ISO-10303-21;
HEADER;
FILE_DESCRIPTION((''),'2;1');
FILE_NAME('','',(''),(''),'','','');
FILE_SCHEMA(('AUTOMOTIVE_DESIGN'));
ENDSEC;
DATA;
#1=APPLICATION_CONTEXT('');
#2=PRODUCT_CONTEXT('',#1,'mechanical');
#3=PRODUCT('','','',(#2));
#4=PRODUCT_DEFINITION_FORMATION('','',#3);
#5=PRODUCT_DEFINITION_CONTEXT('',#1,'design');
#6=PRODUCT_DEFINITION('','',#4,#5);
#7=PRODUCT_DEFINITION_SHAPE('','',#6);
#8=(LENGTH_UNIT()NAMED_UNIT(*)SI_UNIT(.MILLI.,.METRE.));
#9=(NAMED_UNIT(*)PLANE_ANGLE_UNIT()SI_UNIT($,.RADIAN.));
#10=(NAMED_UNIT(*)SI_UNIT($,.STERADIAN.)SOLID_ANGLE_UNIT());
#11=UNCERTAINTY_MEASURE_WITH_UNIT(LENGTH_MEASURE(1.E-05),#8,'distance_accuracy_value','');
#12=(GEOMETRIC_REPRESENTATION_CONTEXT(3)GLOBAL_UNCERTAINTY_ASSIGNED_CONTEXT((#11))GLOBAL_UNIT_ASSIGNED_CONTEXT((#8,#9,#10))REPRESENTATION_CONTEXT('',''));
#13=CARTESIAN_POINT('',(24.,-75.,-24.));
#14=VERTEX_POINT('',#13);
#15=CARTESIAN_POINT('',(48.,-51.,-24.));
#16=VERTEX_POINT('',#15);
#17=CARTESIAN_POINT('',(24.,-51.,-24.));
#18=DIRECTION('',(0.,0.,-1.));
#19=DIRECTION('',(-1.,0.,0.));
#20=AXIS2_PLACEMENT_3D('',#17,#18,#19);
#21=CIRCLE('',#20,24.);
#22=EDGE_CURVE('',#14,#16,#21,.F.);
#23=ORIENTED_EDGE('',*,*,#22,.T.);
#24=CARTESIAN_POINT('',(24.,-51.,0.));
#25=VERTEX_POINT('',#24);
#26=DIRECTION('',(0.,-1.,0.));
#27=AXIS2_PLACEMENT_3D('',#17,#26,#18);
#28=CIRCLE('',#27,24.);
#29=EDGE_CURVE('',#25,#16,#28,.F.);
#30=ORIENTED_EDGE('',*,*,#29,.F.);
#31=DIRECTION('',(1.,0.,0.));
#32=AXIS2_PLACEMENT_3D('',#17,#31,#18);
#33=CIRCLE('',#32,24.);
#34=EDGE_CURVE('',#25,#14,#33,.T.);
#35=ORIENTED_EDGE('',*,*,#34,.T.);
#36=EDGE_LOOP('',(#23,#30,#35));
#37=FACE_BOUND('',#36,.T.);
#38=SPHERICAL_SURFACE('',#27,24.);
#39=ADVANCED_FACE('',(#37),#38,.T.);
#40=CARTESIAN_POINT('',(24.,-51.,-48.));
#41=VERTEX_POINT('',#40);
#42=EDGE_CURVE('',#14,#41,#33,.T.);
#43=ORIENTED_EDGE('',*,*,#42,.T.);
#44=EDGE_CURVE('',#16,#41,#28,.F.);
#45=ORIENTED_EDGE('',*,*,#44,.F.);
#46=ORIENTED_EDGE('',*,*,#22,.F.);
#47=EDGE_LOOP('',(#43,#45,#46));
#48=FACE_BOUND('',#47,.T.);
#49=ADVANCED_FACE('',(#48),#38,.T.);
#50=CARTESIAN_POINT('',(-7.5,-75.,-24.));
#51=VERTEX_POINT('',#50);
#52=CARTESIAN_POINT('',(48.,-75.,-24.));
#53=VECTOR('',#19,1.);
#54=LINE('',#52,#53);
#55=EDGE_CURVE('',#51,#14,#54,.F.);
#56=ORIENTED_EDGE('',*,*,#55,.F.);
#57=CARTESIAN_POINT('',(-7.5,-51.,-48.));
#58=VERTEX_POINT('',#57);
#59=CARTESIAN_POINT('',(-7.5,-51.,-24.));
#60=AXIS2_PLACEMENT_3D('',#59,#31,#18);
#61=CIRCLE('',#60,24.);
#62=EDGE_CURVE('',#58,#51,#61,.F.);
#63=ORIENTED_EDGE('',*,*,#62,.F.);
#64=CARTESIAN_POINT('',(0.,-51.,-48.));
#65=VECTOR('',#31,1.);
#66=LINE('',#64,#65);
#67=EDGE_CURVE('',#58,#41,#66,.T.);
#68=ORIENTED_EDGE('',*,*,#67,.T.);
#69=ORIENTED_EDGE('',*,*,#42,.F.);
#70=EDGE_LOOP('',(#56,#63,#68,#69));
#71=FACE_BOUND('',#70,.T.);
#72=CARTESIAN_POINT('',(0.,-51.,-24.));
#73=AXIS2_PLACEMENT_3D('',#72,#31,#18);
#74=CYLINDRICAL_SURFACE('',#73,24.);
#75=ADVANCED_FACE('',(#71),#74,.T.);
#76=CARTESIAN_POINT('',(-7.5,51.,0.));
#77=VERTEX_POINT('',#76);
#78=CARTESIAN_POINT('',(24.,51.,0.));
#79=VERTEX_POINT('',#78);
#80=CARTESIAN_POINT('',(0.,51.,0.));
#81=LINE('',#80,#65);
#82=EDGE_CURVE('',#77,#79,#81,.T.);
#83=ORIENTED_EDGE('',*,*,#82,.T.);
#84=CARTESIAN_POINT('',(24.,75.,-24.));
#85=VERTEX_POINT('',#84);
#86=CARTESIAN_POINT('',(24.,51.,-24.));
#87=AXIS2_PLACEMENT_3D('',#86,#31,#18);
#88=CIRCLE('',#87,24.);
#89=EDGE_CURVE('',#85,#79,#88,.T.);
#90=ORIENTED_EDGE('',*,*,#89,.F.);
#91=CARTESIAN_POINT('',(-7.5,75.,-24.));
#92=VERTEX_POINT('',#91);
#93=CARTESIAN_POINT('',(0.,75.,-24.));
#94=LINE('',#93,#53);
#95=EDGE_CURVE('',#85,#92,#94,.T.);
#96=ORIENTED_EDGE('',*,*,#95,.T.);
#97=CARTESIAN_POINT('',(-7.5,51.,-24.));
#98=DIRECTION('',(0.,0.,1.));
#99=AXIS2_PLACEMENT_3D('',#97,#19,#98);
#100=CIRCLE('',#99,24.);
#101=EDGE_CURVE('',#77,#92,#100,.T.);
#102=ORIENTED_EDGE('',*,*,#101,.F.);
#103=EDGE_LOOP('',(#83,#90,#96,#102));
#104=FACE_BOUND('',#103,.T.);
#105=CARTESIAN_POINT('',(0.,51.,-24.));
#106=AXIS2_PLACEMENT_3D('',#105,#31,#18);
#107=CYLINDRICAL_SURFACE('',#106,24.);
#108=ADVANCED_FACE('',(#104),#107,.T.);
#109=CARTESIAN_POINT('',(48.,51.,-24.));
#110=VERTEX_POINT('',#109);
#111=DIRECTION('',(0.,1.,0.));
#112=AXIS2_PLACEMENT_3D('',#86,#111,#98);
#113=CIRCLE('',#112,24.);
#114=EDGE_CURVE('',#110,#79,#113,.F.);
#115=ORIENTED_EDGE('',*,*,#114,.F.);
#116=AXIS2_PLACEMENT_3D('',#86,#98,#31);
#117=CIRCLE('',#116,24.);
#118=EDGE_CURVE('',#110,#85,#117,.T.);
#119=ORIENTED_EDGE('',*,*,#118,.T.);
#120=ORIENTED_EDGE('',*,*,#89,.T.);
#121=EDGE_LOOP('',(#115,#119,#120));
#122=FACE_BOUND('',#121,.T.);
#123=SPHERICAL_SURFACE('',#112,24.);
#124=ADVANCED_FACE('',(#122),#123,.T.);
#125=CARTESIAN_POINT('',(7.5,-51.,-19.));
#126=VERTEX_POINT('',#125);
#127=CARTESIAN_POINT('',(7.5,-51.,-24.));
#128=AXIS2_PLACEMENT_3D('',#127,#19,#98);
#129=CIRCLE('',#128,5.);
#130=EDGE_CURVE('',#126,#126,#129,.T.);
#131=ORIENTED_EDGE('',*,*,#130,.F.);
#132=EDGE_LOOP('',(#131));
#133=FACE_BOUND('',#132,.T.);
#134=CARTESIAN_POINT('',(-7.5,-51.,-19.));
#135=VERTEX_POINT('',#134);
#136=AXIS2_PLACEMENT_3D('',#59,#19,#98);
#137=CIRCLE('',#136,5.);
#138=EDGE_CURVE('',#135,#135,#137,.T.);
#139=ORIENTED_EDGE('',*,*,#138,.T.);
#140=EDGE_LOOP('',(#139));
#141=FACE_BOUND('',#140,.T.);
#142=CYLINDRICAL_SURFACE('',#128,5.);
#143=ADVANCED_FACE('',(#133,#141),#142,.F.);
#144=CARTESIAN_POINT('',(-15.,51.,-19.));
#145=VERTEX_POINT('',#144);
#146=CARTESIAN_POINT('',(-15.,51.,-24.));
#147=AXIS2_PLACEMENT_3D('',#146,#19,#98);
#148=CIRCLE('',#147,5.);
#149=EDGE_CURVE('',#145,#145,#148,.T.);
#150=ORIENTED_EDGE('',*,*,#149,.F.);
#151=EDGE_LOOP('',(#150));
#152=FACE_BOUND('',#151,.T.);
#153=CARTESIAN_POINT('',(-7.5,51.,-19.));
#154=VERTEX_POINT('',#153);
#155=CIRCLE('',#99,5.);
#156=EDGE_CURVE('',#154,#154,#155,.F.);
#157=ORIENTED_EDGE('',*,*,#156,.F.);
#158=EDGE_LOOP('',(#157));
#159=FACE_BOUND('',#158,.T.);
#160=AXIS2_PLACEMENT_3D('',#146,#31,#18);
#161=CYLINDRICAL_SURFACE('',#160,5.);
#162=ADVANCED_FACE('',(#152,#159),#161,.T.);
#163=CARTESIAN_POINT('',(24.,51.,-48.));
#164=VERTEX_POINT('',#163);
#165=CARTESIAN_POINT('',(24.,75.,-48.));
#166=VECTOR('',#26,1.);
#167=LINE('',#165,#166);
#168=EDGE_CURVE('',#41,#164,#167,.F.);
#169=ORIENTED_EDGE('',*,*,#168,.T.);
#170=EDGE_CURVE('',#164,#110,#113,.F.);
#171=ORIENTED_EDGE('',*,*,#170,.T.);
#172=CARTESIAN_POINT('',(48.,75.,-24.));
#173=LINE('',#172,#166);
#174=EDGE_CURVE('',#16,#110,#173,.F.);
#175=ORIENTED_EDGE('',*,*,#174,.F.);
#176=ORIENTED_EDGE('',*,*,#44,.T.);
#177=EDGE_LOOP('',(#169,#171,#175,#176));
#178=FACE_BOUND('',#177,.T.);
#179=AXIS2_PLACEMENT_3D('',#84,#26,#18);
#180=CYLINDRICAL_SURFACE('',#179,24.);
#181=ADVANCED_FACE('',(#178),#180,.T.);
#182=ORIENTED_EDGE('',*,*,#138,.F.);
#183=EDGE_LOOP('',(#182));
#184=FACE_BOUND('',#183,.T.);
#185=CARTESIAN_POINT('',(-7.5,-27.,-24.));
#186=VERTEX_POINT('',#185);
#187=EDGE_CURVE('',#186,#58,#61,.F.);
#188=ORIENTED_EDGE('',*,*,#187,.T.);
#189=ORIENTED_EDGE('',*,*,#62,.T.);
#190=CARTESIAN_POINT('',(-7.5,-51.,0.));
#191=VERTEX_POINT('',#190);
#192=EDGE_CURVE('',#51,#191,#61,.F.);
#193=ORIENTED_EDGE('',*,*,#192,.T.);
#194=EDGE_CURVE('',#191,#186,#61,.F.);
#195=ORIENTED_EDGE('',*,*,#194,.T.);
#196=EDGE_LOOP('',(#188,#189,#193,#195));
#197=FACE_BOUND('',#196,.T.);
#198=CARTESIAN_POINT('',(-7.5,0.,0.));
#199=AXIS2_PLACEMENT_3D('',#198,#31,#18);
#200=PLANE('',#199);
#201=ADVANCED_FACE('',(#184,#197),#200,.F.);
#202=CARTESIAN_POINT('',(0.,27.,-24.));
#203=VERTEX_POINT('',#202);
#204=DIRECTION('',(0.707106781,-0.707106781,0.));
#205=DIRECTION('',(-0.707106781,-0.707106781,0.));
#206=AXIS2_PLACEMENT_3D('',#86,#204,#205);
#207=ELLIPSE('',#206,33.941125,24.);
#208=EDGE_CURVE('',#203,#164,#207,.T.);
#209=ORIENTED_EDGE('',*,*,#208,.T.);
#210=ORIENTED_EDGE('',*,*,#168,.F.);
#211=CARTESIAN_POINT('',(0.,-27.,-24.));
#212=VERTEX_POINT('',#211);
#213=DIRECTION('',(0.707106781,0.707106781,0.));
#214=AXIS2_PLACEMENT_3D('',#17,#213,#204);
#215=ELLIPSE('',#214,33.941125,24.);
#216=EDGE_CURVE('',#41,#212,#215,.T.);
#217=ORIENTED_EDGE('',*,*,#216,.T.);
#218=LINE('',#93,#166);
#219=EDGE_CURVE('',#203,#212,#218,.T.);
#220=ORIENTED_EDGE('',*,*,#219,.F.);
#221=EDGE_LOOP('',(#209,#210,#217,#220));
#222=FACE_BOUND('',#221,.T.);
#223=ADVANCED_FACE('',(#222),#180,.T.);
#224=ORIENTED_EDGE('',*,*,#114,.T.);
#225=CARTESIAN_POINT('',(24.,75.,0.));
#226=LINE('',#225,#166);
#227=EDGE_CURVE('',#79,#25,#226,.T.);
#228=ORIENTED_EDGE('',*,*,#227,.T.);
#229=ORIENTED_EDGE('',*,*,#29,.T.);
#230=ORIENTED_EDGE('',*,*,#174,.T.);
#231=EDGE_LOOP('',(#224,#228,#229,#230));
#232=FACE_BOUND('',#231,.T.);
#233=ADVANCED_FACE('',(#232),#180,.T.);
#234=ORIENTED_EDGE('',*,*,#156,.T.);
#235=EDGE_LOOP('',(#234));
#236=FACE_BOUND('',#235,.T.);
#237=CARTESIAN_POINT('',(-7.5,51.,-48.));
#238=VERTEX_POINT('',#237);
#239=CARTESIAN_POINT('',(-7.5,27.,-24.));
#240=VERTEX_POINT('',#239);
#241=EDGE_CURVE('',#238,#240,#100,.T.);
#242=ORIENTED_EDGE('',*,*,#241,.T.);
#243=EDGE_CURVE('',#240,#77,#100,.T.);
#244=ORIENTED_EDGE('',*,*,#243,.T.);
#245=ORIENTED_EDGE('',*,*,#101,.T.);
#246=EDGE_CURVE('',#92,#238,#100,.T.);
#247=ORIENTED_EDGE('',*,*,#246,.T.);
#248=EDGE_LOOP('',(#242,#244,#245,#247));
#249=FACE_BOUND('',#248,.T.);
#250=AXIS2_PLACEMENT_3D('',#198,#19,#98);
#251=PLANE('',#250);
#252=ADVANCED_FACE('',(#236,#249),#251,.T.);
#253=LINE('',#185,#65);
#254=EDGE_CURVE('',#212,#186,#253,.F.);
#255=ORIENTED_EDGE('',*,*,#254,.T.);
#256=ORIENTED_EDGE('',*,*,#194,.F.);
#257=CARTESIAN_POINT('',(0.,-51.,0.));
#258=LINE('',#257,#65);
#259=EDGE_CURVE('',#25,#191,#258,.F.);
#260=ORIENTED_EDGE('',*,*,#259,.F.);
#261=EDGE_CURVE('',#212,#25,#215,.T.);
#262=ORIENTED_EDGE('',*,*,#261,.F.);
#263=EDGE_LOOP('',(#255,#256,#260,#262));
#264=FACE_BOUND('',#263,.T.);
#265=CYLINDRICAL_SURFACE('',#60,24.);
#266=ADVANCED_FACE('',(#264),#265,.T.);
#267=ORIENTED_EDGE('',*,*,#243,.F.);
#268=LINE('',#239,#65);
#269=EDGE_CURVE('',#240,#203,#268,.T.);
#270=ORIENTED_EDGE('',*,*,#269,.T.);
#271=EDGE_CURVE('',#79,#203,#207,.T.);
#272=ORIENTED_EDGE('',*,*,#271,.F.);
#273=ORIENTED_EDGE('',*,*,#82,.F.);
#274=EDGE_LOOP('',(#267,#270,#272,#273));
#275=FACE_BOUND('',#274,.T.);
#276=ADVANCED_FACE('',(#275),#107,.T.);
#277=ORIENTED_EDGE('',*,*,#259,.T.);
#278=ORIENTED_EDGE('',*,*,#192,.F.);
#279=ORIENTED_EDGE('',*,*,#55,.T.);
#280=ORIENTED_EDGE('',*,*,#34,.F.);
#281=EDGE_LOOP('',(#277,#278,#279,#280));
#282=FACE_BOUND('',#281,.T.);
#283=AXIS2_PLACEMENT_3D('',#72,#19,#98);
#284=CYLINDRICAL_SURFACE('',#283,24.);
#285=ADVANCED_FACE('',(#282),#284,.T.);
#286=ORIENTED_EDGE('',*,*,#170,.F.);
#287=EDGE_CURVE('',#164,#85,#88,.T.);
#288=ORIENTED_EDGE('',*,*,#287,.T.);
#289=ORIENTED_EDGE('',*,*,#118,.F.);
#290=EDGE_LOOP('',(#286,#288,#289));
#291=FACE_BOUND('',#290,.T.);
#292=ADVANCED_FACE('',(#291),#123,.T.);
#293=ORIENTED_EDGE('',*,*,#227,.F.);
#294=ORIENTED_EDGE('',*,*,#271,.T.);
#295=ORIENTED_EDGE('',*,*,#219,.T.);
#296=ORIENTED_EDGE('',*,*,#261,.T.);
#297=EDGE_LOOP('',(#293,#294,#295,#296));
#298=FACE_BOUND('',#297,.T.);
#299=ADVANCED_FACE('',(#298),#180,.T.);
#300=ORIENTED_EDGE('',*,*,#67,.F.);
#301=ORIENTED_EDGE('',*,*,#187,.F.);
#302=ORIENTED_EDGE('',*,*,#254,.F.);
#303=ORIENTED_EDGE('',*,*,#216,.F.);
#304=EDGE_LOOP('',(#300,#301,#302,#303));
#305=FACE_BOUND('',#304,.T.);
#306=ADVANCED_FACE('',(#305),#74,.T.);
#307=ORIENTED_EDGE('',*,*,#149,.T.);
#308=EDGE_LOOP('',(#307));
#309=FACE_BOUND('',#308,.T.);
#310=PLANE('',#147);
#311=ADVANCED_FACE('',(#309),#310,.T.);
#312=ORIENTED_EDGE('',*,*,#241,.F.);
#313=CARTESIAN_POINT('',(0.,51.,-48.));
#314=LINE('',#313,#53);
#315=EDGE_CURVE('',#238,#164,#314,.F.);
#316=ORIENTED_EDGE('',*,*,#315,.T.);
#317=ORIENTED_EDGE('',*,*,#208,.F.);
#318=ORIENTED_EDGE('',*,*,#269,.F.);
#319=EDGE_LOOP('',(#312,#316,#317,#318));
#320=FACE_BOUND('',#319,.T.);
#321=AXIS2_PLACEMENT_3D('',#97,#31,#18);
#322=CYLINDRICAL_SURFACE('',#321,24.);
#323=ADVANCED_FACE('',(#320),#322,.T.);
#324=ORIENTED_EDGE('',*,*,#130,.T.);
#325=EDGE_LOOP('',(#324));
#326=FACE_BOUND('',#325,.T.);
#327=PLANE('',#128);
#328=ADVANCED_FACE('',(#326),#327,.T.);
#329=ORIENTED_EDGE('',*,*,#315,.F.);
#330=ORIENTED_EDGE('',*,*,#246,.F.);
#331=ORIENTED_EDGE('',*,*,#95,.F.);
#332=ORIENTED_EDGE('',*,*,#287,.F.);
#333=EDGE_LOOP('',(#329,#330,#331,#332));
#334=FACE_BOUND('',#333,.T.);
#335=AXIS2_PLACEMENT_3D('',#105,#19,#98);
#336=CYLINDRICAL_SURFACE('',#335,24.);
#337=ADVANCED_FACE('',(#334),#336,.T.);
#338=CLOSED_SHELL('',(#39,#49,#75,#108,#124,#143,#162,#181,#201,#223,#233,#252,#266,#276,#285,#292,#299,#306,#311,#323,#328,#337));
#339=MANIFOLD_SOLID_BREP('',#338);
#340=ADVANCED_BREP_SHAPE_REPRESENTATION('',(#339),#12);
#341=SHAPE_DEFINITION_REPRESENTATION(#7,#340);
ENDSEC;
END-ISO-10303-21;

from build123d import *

# Parameters (mm, degrees)
SKETCH1_W           = 48
SKETCH1_H           = 48
BOSS_EXTRUDE1_DEPTH = 75
SKETCH2_W           = 48
SKETCH2_H           = 48
BOSS_EXTRUDE2_DEPTH = 7.5
FILLET1_R           = 24
SKETCH3_R           = 5
CUT_EXTRUDE1_DEPTH  = 15
SKETCH4_R           = 5
BOSS_EXTRUDE3_DEPTH = 7.5


with BuildPart() as part:
    # Sketch1 → Boss-Extrude1 (new, symmetric)
    with BuildSketch(Plane(origin=(0, 0, 0), x_dir=(1, 0, 0), z_dir=(0, 1, 0))):
        with Locations((24, 24)):
            Rectangle(SKETCH1_W, SKETCH1_H)
    extrude(amount=BOSS_EXTRUDE1_DEPTH, both=True)

    # Sketch2 → Boss-Extrude2 (add, symmetric)
    with BuildSketch(Plane.ZY):
        with Locations((-24, 51)):
            Rectangle(SKETCH2_W, SKETCH2_H)
        with Locations((-24, -51)):
            Rectangle(SKETCH2_W, SKETCH2_H)
    extrude(amount=BOSS_EXTRUDE2_DEPTH, both=True)

    # Fillet1
    fillet1_edges = [part.edges().sort_by_distance(p)[0] for p in [
        (48, 75, -24),
        (0, 0, -48),
        (20.25, 75, -48),
        (0, 0, 0),
        (-3.75, 27, -48),
        (-3.75, 27, 0),
        (-3.75, -27, 0),
        (-3.75, -27, -48),
        (20.25, -75, -48),
        (48, -75, -24),
        (20.25, -75, 0),
        (48, 0, -48),
        (48, 0, 0),
        (20.25, 75, 0),
    ]]
    fillet(fillet1_edges, radius=FILLET1_R - 0.0001)  # a hair under: the kernel refuses the full size

    # Sketch3 → Cut-Extrude1 (cut)
    with BuildSketch(Plane.ZY.offset(7.5)):
        with Locations((-24, -51)):
            Circle(SKETCH3_R)
    extrude(amount=-CUT_EXTRUDE1_DEPTH, mode=Mode.SUBTRACT)

    # Sketch4 → Boss-Extrude3 (add, symmetric)
    with BuildSketch(Plane.ZY.offset(7.5)):
        with Locations((-24, 51)):
            Circle(SKETCH4_R)
    extrude(amount=BOSS_EXTRUDE3_DEPTH, both=True)


solid = part.part
